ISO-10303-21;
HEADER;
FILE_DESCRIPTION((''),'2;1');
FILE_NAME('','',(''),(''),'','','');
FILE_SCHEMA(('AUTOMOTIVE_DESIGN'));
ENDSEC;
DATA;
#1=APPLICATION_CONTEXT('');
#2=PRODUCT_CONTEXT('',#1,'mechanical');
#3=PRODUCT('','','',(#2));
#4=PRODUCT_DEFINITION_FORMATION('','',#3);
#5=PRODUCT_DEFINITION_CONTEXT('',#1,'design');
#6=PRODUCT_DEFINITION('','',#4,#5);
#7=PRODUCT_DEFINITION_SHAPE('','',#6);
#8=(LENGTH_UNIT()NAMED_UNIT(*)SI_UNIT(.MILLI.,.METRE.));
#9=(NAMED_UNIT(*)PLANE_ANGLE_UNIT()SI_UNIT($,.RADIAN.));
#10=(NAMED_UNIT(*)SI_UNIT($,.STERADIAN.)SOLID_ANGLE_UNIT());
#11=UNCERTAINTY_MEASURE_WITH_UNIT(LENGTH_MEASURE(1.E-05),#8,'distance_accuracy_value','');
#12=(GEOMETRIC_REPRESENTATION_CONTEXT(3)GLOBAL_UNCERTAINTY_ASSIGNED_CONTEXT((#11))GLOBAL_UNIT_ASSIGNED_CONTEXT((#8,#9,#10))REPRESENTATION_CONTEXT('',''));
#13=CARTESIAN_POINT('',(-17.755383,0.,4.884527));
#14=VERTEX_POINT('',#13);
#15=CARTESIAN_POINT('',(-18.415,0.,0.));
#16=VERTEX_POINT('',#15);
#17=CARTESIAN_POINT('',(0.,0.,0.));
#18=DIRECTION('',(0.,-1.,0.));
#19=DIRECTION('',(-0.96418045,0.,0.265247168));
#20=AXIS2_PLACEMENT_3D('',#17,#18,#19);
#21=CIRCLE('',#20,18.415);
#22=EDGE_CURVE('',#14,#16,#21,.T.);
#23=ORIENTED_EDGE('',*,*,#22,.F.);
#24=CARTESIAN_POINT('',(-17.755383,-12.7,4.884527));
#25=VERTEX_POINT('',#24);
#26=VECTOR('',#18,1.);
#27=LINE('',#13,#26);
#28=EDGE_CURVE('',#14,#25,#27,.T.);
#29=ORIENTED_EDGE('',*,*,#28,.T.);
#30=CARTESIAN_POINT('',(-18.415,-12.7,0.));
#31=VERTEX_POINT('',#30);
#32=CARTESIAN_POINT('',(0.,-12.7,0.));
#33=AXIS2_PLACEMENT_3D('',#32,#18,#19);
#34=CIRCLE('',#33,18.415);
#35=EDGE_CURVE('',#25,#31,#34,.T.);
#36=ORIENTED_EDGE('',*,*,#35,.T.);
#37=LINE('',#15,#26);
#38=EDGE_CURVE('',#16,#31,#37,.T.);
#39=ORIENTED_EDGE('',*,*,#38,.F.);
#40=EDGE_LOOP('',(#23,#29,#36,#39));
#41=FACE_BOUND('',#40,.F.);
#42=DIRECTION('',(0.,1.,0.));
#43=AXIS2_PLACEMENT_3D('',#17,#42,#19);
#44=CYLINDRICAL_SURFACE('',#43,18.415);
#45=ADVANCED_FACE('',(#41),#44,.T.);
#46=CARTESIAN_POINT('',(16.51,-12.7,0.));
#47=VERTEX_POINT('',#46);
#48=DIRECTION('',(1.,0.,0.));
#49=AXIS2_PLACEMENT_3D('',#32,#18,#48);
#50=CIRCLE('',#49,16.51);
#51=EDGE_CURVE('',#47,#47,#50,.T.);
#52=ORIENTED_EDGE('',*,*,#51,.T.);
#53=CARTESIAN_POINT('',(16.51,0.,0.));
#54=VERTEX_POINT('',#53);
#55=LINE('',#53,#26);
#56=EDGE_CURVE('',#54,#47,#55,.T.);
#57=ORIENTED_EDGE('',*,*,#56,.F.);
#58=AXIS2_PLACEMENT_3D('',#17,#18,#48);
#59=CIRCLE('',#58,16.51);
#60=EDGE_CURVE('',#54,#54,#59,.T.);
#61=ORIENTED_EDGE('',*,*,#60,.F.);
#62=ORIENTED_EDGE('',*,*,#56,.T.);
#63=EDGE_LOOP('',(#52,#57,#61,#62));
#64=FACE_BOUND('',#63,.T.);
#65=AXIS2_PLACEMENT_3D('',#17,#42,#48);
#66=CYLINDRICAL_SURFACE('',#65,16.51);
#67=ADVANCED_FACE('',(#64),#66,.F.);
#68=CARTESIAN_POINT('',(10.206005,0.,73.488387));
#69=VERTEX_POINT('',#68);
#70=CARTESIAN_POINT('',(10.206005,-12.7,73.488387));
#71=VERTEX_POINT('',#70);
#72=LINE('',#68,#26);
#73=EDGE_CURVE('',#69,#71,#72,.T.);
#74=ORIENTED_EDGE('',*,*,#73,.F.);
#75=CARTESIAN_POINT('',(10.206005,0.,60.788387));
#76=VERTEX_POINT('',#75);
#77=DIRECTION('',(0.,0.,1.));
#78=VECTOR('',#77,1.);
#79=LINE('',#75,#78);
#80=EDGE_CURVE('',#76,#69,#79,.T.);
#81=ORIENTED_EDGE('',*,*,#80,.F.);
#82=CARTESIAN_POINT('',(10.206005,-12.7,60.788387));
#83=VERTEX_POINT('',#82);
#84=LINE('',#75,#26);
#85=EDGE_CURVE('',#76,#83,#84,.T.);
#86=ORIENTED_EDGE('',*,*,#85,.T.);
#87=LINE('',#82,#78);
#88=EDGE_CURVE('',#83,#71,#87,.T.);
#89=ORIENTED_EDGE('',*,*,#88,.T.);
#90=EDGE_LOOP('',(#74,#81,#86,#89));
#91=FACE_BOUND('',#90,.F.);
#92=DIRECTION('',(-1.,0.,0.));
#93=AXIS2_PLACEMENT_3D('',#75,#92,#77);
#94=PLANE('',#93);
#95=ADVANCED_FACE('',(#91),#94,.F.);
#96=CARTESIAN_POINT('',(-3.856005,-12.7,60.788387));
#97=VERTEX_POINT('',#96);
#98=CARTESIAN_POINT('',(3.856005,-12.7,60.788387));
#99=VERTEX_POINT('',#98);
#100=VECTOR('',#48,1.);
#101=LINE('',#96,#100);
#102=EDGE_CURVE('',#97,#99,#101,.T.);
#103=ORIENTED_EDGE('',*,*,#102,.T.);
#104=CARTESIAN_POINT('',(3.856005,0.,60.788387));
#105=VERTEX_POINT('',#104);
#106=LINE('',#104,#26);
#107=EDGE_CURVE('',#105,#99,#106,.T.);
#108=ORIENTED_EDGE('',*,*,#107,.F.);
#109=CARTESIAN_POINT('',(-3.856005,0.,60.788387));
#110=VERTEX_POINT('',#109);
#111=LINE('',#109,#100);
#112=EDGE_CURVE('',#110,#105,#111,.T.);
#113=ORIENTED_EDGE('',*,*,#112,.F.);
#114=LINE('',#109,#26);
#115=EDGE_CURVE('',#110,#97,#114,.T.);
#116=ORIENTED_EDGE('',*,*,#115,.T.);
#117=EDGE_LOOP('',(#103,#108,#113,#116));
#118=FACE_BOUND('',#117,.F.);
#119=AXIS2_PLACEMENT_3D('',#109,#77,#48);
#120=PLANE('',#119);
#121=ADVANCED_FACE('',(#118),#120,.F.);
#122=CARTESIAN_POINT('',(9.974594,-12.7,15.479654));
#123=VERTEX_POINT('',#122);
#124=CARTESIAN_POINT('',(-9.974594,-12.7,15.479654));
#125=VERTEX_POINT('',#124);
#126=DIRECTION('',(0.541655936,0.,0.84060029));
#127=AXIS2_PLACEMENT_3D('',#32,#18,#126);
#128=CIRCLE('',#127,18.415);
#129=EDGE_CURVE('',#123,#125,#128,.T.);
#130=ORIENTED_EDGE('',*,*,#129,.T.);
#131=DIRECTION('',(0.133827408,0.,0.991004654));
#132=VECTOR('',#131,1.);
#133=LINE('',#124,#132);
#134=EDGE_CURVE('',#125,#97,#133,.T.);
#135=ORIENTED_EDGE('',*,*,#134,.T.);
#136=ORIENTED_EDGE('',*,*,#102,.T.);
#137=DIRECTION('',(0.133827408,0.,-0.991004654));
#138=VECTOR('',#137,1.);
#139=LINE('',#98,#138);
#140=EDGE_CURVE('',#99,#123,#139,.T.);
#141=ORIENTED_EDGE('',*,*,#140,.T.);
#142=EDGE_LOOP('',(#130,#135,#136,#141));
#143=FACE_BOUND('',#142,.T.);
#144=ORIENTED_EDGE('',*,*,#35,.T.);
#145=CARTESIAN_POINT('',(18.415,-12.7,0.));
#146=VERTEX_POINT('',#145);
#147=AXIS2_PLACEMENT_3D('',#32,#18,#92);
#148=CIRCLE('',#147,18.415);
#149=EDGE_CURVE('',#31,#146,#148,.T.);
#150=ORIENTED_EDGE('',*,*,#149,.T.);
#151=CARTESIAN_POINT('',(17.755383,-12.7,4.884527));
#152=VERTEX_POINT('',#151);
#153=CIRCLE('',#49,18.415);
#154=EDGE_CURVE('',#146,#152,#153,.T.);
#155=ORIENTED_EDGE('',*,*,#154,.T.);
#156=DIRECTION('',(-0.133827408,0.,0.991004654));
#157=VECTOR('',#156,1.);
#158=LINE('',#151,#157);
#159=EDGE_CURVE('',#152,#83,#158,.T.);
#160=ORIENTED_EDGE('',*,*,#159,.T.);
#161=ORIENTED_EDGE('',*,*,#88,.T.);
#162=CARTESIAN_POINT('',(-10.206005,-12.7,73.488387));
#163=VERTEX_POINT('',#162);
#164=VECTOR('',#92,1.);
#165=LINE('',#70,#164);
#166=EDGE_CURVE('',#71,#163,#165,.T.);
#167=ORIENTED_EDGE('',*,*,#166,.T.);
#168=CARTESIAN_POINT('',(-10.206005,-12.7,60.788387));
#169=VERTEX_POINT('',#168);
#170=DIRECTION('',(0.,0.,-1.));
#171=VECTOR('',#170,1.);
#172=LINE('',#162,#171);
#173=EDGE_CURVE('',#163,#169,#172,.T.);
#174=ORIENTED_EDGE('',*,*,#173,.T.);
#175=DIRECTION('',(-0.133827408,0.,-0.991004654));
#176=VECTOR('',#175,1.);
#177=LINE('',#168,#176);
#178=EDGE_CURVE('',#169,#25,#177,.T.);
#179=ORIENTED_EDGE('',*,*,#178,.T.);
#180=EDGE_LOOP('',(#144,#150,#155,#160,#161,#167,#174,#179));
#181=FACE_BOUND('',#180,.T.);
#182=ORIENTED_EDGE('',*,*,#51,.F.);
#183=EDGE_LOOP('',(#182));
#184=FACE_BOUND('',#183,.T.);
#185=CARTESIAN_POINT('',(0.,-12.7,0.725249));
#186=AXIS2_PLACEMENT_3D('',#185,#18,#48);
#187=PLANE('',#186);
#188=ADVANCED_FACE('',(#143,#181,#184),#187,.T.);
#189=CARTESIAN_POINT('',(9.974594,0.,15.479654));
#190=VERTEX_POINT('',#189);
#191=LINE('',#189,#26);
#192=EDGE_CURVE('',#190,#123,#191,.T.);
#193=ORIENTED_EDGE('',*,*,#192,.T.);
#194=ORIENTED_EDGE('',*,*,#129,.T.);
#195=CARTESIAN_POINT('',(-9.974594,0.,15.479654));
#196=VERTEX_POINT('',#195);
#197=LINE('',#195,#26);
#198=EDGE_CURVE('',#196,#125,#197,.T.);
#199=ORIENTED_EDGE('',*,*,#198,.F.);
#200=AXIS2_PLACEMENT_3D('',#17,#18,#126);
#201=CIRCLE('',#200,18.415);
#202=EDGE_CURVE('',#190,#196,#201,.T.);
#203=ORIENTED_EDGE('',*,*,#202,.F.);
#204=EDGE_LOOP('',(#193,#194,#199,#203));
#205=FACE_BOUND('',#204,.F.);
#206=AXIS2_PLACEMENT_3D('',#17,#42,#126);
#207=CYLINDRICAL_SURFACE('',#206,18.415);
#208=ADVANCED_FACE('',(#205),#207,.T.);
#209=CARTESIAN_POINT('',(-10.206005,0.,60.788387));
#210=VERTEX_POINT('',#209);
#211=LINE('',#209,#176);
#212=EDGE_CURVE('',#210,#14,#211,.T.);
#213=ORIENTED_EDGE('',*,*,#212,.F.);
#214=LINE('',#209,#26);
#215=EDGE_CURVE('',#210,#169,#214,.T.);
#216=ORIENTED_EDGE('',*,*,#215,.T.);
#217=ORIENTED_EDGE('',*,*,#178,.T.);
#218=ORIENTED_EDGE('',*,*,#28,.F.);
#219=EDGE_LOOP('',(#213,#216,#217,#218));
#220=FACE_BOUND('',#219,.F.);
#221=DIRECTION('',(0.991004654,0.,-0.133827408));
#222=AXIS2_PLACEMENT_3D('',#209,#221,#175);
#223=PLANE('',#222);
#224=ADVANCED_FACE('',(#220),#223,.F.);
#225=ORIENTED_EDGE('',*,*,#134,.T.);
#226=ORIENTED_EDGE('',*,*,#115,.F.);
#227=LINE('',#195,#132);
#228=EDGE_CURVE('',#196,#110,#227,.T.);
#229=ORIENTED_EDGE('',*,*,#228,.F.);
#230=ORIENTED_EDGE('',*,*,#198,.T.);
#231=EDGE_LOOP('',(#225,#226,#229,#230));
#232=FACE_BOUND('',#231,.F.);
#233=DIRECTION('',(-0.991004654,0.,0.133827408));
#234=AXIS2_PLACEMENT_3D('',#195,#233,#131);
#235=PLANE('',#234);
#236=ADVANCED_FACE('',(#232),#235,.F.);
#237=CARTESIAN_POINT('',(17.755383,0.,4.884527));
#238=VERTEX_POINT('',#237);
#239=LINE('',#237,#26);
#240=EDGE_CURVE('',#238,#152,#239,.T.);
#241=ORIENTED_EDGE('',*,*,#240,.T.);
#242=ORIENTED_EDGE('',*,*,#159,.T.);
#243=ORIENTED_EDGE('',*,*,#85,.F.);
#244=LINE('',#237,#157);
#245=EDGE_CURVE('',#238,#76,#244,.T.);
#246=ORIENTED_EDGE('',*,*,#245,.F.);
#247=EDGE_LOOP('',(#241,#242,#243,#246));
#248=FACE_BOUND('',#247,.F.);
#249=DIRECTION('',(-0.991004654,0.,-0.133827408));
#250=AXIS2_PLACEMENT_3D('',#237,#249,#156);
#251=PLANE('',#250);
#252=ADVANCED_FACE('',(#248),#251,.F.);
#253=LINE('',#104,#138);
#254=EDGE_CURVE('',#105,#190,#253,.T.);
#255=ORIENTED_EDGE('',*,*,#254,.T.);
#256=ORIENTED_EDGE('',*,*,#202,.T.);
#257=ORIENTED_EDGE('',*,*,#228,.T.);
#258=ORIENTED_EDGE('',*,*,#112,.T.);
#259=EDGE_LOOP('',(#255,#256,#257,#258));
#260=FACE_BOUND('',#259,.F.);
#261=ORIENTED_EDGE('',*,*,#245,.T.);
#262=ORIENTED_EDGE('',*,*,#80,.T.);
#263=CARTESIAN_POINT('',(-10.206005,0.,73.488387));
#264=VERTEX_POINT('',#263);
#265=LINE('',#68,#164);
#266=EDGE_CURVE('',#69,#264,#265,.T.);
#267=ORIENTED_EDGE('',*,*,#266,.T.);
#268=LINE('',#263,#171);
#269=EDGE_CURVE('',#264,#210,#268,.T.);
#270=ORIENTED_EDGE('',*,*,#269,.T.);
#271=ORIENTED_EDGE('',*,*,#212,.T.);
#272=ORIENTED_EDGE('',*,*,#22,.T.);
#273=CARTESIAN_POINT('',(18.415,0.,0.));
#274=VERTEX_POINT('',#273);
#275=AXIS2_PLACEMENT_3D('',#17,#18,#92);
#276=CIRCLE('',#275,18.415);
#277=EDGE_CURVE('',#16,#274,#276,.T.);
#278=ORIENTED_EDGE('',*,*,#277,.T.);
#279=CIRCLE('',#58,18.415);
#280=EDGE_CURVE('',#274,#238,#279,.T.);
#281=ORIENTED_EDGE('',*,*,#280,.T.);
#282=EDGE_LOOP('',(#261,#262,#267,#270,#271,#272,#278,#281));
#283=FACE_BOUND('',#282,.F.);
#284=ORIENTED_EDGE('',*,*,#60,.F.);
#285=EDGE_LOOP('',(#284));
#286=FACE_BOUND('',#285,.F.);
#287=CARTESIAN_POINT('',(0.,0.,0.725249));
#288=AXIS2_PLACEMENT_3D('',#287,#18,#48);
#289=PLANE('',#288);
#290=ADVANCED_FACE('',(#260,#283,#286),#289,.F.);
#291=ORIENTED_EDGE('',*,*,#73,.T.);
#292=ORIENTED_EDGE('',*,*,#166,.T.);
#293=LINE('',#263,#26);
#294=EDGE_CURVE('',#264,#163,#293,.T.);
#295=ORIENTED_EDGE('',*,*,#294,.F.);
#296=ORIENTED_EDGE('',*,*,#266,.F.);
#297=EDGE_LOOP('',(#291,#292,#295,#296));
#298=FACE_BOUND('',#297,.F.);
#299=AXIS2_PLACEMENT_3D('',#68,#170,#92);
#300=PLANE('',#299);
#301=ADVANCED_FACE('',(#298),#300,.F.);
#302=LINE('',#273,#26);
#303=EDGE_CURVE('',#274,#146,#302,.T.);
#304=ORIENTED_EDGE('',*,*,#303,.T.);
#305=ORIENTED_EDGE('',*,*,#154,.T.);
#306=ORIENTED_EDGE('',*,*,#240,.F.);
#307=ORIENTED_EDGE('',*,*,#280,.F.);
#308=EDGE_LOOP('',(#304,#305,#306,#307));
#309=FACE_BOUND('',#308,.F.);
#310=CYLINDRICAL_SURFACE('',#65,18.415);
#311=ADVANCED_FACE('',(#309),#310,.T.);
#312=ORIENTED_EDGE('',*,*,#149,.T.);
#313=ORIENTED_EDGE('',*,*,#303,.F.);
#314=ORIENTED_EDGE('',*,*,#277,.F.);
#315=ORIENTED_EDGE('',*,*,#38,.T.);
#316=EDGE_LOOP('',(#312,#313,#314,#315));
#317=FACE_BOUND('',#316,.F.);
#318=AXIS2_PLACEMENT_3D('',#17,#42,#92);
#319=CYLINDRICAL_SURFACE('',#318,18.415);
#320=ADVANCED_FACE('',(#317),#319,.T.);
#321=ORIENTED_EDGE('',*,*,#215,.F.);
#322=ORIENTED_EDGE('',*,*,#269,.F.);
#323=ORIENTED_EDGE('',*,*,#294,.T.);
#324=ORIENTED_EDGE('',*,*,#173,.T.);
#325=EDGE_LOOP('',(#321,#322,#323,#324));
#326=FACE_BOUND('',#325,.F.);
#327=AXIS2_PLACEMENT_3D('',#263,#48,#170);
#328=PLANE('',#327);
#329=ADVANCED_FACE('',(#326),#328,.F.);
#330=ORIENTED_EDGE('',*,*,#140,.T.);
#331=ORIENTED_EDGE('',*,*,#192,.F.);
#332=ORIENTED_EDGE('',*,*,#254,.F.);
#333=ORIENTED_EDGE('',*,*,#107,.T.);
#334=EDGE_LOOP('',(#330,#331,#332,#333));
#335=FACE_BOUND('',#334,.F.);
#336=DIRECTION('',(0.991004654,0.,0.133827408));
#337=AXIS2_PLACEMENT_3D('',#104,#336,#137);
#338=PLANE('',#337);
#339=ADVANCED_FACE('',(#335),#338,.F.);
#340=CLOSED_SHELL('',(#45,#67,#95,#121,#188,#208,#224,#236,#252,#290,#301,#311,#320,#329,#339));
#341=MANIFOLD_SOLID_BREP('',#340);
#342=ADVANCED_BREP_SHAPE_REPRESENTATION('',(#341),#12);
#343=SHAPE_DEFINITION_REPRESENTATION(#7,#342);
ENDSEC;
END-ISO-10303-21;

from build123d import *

# Parameters (mm, degrees)
F0_R     = 16.51
F1_DEPTH = 12.7


# Not quite as in the source:
# - a feature names something its author has since deleted; it is built from what else it names


with BuildPart() as f1:
    # F0 (on Front) → F1 (new body)
    with BuildSketch(Plane.XZ):
        with BuildLine():
            ThreePointArc((17.7553829843, 4.8845265973), (14.8425769227, 10.9000062062), (9.9745940638, 15.4796543328))
            ThreePointArc((9.9745940638, 15.4796543328), (0, 18.415), (-9.9745940638, 15.4796543328))
            ThreePointArc((-9.9745940638, 15.4796543328), (-14.8425769227, 10.9000062062), (-17.7553829843, 4.8845265973))
            Line((-17.7553829843, 4.8845265973), (-18.415, 0))
            ThreePointArc((-18.415, 0), (0, -18.415), (18.415, 0))
            Line((18.415, 0), (17.7553829843, 4.8845265973))
        make_face()
        Circle(F0_R, mode=Mode.SUBTRACT)
        with BuildLine():
            ThreePointArc((-17.7553829843, 4.8845265973), (-14.8425769227, 10.9000062062), (-9.9745940638, 15.4796543328))
            Line((-9.9745940638, 15.4796543328), (-3.8560049814, 60.7883871295))
            Line((-3.8560049814, 60.7883871295), (-10.2060049814, 60.7883871295))
            Line((-10.2060049814, 60.7883871295), (-17.7553829843, 4.8845265973))
        make_face()
        with BuildLine():
            Line((3.8560049814, 60.7883871295), (9.9745940638, 15.4796543328))
            ThreePointArc((9.9745940638, 15.4796543328), (14.8425769227, 10.9000062062), (17.7553829843, 4.8845265973))
            Line((17.7553829843, 4.8845265973), (10.2060049814, 60.7883871295))
            Line((10.2060049814, 60.7883871295), (3.8560049814, 60.7883871295))
        make_face()
        with BuildLine():
            ThreePointArc((18.415, 0), (18.2493507098, 2.4644317137), (17.7553829843, 4.8845265973))
            Line((17.7553829843, 4.8845265973), (18.415, 0))
        make_face()
        with BuildLine():
            Line((-18.415, 0), (-17.7553829843, 4.8845265973))
            ThreePointArc((-17.7553829843, 4.8845265973), (-18.2493507098, 2.4644317137), (-18.415, 0))
        make_face()
        Polygon((0, 60.7883871295), (3.8560049814, 60.7883871295), (10.2060049814, 60.7883871295), (10.2060049814, 73.4883871295), (-10.2060049814, 73.4883871295), (-10.2060049814, 60.7883871295), (-3.8560049814, 60.7883871295), align=None)
    extrude(amount=F1_DEPTH)


solid = f1.part
